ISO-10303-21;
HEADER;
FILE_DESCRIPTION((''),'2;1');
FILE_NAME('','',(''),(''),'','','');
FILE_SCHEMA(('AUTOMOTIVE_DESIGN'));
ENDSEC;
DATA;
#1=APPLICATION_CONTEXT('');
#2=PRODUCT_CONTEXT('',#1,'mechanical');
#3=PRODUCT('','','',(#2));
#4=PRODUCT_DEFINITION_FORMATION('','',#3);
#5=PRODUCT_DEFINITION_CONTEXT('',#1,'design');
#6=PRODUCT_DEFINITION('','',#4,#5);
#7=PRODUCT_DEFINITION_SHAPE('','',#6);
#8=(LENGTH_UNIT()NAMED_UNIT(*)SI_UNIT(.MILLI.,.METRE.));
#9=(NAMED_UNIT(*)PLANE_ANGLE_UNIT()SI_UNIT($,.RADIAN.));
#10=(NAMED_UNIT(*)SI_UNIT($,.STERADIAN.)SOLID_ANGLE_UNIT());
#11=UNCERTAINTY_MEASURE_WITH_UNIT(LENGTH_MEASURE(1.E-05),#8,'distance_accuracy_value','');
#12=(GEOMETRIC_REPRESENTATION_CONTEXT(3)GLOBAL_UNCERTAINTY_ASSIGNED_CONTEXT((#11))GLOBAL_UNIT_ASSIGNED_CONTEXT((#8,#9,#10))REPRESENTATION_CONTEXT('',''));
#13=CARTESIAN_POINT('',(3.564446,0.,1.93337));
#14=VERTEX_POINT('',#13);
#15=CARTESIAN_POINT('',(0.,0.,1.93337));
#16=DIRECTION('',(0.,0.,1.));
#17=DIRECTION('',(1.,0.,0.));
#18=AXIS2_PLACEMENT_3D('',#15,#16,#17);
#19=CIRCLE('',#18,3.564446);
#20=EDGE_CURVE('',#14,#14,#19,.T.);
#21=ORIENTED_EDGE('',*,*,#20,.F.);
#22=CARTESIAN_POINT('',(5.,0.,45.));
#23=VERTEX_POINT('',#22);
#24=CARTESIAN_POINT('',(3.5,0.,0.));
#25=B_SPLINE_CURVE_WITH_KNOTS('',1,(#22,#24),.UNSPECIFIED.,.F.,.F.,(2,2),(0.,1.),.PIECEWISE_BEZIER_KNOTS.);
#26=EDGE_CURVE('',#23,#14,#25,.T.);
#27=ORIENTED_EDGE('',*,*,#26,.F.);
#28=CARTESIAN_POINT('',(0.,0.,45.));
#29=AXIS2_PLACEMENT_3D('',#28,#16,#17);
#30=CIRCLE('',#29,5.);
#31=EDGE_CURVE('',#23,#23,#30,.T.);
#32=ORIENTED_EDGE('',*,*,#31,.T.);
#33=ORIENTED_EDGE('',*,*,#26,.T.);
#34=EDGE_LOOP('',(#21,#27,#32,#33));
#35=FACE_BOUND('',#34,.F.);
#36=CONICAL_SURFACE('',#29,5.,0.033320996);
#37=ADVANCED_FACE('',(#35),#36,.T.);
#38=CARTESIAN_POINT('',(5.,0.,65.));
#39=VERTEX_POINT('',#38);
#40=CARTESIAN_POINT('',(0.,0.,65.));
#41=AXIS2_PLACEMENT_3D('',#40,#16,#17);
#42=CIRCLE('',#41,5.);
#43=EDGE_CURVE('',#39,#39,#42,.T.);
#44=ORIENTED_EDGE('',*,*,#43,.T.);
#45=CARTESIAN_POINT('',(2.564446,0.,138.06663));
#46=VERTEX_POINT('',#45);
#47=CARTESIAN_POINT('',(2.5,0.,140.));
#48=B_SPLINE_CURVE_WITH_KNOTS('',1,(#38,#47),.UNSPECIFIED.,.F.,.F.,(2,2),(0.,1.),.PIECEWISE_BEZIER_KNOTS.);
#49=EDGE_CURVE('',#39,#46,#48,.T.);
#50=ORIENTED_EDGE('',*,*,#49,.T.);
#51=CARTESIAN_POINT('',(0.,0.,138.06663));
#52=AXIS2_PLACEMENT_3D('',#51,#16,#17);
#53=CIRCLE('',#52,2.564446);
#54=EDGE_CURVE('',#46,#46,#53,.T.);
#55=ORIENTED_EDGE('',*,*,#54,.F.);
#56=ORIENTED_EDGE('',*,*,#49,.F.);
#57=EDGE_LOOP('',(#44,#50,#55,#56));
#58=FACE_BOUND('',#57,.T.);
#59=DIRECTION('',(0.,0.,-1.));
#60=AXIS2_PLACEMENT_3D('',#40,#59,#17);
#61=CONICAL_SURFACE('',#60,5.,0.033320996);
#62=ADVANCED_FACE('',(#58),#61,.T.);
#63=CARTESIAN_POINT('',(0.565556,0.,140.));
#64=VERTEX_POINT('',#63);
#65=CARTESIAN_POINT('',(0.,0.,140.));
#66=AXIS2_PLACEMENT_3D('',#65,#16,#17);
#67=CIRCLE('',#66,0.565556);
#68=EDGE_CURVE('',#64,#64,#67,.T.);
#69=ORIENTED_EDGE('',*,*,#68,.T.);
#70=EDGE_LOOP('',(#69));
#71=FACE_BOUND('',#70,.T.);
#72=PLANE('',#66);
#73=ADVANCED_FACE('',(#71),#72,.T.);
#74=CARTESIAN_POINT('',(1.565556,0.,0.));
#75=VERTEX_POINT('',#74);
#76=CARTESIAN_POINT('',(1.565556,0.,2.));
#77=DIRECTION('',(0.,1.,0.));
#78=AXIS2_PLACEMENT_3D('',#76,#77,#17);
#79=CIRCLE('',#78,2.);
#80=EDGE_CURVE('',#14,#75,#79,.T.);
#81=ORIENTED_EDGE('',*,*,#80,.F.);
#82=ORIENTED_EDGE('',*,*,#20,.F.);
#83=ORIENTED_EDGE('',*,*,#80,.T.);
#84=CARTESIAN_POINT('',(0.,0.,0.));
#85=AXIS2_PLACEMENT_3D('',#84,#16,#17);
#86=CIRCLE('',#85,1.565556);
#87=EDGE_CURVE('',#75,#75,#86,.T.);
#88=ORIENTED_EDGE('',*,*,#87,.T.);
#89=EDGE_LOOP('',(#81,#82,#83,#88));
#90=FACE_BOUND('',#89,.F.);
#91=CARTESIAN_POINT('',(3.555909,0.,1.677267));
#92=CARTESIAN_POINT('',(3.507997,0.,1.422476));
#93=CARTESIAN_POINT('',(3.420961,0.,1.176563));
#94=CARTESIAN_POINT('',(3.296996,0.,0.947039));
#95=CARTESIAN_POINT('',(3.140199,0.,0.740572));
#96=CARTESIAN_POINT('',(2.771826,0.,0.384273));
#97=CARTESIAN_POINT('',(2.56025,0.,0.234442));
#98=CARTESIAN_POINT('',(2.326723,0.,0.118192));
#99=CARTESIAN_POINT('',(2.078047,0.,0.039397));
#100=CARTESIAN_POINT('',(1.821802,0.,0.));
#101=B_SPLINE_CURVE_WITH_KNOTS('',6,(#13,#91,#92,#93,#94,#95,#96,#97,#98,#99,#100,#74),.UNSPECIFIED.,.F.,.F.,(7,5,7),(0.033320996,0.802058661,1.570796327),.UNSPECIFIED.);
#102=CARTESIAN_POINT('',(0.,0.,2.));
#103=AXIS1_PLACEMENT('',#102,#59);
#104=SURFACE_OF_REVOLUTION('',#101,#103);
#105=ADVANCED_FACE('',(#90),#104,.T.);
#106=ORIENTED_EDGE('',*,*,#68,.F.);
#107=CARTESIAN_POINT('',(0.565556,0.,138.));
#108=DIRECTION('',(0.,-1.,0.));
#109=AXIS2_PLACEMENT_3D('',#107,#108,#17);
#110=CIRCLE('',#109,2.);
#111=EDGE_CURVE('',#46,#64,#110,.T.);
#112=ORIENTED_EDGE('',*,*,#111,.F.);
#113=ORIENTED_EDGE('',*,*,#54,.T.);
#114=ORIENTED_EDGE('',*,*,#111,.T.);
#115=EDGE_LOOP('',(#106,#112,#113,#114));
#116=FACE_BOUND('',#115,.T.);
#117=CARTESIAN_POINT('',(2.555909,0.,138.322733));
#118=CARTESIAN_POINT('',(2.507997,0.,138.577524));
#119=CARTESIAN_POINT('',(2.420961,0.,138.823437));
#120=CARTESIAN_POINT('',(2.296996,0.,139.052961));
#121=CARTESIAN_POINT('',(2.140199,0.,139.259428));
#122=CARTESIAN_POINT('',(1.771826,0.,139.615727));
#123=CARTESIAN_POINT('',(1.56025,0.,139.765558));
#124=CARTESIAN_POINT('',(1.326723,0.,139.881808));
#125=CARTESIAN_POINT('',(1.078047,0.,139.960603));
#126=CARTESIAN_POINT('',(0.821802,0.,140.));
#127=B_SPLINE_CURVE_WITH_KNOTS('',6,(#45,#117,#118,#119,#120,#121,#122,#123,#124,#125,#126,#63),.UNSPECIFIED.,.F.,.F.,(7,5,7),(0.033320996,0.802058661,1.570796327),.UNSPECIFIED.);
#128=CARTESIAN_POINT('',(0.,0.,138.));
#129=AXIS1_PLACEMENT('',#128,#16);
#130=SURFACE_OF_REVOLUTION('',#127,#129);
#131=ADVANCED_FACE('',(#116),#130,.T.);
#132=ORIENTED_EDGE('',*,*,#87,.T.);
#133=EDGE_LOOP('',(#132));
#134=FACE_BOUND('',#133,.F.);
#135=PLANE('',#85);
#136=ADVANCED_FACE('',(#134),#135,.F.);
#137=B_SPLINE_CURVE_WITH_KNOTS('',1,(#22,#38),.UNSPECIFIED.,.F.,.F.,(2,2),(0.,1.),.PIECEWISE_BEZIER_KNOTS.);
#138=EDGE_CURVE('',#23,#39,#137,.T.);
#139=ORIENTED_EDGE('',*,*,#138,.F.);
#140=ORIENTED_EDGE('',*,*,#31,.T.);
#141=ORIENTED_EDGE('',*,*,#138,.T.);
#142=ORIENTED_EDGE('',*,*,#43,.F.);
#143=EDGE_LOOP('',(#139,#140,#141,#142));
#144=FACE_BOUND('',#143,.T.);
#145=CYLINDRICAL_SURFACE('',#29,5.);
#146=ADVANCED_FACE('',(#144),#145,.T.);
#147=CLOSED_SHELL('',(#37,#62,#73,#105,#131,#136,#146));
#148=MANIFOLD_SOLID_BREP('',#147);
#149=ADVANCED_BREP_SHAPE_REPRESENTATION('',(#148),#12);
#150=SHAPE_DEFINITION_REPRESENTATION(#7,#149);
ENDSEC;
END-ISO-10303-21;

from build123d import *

# Parameters (mm, degrees)
F2_R      = 5
F0_R      = 3.5
F4_R      = 2
F3_FACE_R = 5
F6_R      = 5
F7_FACE_R = 5
F9_R      = 2.5
F11_R     = 2


with BuildPart() as f3:
    # F2 (on offset) → F3 section 0
    with BuildSketch(Plane.XY.offset(45)):
        Circle(F2_R)
    # F0 (on Top) → F3 section 1
    with BuildSketch(Plane.XY):
        Circle(F0_R)
    loft()

    # F4
    f4_edges = [f3.edges().sort_by_distance(p)[0] for p in [
        (-3.5, 0, 0),
    ]]
    fillet(f4_edges, radius=F4_R)

    # F3_face (on face) → F7 section 0
    with BuildSketch(Plane.XY.offset(45)):
        Circle(F3_FACE_R)
    # F6 (on offset) → F7 section 1
    with BuildSketch(Plane.XY.offset(65)):
        Circle(F6_R)
    loft()

    # F7_face (on face) → F10 section 0
    with BuildSketch(Plane.XY.offset(65)):
        Circle(F7_FACE_R)
    # F9 (on offset) → F10 section 1
    with BuildSketch(Plane.XY.offset(140)):
        Circle(F9_R)
    loft()

    # F11
    f11_edges = [f3.edges().sort_by_distance(p)[0] for p in [
        (-2.5, 0, 140),
    ]]
    fillet(f11_edges, radius=F11_R)


solid = f3.part
